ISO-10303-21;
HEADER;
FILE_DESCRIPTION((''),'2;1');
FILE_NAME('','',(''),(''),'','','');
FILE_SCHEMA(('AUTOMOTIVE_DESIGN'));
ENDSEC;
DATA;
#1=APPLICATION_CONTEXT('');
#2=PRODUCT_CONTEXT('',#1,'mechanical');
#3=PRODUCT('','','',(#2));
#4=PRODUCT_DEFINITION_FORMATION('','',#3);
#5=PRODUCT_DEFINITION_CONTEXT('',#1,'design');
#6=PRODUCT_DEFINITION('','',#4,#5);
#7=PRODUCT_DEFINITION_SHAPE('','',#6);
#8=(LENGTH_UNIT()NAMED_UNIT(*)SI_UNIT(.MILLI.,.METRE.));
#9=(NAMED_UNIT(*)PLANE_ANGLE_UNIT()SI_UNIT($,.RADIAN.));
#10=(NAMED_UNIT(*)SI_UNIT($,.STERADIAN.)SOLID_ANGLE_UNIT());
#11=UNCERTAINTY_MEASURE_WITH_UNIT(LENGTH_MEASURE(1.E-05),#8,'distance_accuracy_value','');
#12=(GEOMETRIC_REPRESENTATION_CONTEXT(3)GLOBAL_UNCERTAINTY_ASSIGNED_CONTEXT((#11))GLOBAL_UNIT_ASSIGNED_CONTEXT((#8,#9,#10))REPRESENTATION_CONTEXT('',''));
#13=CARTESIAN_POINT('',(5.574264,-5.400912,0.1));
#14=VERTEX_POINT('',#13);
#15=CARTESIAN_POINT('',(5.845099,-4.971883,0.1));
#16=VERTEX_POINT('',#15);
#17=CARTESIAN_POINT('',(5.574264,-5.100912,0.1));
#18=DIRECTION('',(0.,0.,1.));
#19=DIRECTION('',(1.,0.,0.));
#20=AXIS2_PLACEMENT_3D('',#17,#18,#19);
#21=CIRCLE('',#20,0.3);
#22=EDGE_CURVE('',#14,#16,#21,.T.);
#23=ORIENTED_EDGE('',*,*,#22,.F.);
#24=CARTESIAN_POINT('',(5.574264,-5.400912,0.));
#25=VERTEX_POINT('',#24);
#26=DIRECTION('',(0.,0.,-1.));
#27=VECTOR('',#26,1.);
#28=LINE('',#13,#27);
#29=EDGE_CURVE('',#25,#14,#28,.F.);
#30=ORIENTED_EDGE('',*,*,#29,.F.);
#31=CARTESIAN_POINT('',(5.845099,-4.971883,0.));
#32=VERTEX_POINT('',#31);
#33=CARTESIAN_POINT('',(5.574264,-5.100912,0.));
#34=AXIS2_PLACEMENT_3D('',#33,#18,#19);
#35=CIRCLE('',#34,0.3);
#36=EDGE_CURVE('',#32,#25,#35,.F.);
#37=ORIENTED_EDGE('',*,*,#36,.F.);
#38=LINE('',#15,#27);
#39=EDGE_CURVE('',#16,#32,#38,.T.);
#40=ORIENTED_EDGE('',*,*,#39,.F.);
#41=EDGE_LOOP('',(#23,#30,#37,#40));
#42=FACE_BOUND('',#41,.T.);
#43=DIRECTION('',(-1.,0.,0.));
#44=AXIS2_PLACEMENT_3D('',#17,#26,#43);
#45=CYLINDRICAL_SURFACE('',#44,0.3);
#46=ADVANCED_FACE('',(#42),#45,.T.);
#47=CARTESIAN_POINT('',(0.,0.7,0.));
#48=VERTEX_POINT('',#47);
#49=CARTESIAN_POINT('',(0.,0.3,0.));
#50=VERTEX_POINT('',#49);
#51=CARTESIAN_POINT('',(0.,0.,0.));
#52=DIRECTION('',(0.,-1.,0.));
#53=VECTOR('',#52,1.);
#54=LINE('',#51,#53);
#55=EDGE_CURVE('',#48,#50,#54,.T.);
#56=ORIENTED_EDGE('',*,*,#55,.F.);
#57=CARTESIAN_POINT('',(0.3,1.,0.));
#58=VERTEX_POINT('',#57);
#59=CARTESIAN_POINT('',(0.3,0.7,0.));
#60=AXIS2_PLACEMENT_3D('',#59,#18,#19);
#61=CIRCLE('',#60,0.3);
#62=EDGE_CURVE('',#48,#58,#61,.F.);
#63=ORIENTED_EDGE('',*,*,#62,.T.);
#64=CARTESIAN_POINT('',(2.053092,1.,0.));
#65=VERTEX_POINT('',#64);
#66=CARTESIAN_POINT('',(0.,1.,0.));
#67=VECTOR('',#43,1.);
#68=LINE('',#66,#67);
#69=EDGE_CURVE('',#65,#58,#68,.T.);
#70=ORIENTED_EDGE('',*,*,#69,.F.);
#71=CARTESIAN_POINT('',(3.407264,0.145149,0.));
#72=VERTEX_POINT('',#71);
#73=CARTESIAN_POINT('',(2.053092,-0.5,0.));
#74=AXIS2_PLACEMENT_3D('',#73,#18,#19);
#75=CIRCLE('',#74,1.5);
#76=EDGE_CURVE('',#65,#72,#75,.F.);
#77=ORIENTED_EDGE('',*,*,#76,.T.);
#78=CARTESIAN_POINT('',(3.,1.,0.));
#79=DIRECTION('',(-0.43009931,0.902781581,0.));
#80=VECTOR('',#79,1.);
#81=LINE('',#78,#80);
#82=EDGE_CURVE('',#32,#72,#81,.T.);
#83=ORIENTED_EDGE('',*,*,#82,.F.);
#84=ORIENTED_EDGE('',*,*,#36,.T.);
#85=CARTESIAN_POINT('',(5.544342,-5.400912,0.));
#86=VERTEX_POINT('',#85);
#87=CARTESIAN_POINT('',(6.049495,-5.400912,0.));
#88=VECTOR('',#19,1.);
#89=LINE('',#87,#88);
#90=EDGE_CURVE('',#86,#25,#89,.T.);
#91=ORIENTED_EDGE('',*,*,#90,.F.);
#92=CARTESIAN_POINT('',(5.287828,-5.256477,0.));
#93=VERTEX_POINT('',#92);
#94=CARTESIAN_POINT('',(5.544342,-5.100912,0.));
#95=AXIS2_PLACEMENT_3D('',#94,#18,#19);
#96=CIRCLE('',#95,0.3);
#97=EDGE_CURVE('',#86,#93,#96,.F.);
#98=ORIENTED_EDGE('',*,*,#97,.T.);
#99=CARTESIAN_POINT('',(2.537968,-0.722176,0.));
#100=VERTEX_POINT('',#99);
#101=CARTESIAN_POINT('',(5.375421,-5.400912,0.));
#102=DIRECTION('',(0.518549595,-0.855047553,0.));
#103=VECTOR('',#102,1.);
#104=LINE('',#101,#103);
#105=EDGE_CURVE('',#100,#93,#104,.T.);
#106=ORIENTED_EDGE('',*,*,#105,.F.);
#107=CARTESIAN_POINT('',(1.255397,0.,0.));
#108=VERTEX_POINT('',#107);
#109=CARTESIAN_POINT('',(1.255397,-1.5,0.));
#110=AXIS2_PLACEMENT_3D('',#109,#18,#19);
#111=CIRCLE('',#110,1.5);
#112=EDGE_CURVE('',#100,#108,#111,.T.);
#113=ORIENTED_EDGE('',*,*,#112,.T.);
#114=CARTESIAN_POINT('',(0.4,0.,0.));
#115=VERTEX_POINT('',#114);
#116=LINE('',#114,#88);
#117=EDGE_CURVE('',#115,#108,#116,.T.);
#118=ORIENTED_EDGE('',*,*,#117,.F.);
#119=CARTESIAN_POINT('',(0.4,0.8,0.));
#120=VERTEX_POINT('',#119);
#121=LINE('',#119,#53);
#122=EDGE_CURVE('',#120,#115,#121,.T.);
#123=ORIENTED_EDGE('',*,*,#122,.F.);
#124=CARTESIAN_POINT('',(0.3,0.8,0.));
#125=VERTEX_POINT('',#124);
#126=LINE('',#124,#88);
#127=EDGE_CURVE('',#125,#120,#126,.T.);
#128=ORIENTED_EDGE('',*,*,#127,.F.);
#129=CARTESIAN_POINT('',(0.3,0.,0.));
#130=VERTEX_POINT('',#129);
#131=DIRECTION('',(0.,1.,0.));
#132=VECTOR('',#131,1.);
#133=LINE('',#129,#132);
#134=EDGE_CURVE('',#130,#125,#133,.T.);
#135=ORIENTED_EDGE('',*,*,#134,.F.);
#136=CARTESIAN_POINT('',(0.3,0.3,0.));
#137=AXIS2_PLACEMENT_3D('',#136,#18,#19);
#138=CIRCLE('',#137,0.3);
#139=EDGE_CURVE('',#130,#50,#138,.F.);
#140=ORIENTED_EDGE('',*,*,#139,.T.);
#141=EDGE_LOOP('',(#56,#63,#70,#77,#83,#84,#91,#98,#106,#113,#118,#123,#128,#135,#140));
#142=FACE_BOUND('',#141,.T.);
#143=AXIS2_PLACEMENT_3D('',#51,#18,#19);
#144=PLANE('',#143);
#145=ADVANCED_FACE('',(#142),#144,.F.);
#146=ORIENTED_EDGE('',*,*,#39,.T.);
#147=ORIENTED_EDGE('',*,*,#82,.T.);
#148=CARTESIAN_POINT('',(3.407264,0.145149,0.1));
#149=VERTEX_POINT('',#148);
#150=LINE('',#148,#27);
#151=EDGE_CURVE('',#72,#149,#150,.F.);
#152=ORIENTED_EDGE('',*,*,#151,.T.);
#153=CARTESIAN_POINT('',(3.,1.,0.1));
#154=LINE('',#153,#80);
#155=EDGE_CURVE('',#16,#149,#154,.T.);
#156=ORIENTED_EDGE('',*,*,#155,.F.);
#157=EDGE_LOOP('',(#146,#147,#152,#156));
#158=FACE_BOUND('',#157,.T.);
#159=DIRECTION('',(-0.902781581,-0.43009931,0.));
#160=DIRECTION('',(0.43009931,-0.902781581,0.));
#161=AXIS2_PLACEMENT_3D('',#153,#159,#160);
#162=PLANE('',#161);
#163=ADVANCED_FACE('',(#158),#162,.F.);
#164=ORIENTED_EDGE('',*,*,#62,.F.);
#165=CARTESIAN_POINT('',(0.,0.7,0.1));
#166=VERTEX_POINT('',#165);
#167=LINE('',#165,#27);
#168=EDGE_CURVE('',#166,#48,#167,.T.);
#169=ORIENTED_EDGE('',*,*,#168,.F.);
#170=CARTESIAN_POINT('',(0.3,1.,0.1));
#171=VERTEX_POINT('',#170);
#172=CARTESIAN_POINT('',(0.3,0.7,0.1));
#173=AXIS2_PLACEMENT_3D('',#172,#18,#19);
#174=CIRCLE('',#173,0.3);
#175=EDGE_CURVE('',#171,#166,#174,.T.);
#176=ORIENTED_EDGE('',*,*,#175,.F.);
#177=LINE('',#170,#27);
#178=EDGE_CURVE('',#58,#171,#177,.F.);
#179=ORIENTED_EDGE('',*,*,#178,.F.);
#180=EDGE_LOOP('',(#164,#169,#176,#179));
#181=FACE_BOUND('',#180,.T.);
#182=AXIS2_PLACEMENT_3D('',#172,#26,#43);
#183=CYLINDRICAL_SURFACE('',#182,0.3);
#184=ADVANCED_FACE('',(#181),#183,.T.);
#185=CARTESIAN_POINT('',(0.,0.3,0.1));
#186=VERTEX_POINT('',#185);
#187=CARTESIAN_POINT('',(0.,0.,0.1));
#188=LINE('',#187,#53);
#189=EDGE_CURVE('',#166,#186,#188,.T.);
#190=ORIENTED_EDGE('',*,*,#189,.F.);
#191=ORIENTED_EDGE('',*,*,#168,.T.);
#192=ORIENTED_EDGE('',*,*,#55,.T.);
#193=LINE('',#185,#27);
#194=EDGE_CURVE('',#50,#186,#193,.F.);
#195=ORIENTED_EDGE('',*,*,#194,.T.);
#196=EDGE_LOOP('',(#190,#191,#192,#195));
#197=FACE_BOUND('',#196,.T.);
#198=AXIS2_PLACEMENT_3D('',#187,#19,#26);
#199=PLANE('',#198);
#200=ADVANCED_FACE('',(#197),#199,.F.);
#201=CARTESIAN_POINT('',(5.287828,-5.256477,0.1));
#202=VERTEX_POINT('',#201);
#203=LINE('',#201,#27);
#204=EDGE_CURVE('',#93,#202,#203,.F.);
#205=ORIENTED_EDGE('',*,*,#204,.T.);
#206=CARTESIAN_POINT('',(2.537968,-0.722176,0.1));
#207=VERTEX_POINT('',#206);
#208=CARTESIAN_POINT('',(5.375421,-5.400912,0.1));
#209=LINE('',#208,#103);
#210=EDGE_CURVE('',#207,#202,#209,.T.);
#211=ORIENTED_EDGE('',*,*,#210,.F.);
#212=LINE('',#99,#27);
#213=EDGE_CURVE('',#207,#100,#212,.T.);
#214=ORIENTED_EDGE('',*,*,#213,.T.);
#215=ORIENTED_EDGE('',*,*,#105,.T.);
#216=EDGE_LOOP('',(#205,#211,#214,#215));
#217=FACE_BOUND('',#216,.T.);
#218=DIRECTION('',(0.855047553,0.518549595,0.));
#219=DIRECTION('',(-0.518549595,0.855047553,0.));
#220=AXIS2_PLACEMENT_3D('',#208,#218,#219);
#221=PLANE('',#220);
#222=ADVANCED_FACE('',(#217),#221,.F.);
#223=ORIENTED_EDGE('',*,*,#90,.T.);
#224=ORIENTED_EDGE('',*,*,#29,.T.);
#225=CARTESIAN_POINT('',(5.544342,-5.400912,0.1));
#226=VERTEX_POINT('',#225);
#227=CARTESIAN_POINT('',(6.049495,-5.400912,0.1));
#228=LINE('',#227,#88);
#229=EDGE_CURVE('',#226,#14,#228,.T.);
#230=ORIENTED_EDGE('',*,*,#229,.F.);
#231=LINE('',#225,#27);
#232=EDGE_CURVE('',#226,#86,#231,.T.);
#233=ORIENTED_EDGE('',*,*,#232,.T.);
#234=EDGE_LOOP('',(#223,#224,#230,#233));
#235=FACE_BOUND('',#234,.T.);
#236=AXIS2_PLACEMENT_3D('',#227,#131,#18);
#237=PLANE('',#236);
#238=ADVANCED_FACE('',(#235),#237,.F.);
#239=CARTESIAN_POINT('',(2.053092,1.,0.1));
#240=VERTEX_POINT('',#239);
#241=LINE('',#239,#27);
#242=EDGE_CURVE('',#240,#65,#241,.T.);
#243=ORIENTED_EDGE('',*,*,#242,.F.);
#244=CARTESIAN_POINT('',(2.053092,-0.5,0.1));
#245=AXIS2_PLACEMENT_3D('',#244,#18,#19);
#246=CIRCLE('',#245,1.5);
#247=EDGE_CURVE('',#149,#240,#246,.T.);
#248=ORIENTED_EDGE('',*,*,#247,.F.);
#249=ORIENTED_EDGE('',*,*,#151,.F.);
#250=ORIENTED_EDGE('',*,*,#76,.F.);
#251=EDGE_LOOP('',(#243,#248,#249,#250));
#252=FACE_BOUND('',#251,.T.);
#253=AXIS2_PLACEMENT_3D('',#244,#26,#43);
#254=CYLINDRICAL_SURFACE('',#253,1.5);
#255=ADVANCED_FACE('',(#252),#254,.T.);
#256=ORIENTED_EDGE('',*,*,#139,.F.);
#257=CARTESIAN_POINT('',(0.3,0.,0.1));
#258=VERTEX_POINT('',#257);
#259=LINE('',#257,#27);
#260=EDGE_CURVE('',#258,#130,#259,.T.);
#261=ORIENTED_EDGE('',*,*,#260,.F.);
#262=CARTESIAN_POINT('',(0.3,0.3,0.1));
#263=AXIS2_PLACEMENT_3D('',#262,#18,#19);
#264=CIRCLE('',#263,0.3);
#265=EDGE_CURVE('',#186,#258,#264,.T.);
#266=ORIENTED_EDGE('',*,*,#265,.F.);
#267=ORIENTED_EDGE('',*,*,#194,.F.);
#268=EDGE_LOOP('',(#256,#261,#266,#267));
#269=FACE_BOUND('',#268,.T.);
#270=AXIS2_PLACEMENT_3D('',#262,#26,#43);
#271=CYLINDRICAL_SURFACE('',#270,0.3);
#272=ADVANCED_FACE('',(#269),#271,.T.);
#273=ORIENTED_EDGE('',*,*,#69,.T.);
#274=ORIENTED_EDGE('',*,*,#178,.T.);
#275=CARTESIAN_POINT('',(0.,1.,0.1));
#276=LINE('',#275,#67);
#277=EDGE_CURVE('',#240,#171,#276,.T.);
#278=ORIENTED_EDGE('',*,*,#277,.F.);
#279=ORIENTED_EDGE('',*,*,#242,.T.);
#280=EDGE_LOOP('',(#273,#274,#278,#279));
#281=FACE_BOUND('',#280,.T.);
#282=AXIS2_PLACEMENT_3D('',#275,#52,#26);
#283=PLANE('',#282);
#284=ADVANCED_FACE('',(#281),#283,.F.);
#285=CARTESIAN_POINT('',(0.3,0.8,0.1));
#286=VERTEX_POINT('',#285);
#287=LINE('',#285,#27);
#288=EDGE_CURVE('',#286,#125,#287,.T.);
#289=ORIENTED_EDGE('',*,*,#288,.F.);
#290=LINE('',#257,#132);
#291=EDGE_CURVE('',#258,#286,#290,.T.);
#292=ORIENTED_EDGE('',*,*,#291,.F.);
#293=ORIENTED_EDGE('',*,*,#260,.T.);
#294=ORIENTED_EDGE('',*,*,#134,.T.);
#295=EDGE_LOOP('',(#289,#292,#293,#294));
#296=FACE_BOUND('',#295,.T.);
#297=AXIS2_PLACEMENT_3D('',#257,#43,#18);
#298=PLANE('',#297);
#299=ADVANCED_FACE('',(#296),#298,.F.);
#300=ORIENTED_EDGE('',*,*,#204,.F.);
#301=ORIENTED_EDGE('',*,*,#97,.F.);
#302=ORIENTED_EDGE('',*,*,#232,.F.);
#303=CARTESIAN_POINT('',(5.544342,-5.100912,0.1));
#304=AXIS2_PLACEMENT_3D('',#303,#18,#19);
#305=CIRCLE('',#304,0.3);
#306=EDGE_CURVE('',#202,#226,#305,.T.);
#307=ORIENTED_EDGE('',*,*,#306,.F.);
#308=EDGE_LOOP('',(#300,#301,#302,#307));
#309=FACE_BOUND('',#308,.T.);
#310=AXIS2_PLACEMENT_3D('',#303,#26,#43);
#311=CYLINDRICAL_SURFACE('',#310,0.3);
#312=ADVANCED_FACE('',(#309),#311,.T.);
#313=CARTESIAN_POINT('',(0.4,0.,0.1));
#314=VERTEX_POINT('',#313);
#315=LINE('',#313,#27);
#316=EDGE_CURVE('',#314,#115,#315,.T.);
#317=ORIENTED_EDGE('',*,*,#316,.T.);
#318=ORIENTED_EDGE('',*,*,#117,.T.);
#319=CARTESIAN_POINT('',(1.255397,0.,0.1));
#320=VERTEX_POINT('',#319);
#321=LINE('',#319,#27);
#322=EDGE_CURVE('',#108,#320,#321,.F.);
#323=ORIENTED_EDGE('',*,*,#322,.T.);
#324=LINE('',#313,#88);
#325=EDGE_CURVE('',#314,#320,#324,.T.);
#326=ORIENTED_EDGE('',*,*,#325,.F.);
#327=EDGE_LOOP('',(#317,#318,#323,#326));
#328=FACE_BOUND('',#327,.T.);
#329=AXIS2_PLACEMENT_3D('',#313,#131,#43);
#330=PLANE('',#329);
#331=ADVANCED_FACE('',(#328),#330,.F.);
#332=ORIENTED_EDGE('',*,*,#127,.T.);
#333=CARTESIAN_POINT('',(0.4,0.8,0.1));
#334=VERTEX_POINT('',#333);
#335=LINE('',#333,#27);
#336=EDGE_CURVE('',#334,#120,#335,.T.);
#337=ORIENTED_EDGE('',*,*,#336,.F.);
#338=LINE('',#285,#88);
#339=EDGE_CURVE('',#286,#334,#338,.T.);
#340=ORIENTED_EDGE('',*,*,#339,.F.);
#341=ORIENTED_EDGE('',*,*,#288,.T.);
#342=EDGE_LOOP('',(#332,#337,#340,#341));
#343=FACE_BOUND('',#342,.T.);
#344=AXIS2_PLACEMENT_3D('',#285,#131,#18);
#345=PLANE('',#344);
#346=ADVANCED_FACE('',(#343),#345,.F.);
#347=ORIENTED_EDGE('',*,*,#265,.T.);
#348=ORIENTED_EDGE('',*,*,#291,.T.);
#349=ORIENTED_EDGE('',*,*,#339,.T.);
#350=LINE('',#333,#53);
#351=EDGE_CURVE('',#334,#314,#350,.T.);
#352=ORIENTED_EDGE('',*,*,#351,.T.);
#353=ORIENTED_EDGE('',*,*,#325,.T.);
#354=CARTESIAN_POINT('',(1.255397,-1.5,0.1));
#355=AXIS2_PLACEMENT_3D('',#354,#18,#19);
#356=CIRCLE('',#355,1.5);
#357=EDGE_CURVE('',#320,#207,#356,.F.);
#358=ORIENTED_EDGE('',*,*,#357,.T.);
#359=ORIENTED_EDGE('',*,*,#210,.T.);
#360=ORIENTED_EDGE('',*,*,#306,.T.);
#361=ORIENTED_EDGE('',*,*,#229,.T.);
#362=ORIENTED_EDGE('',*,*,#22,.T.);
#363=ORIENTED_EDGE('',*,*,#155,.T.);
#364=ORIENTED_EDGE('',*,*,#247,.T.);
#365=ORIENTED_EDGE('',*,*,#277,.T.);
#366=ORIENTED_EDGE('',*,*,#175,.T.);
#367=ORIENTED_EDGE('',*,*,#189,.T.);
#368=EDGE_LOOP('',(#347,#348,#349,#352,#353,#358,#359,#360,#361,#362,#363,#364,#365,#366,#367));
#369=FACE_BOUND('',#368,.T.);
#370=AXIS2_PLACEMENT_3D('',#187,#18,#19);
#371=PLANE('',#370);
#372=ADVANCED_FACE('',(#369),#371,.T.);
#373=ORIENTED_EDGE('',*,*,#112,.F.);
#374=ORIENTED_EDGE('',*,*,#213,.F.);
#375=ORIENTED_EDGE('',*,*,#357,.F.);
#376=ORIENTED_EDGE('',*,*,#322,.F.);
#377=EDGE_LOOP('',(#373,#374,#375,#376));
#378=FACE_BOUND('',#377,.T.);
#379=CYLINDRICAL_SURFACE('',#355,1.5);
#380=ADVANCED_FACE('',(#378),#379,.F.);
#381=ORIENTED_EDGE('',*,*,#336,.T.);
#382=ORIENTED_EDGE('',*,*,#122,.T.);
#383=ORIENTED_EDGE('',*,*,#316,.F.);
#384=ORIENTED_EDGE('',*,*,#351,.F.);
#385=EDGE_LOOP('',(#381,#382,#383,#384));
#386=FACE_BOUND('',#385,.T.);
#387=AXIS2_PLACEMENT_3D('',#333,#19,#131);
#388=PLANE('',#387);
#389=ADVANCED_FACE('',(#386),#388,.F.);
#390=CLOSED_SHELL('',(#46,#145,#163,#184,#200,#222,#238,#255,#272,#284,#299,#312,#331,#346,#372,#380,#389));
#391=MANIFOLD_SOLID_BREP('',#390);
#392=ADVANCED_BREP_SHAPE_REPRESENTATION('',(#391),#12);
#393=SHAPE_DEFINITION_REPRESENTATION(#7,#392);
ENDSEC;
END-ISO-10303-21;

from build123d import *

# Parameters (mm, degrees)
BOSS_EXTRUDE1_DEPTH = 0.1
FILLET1_R           = 1.5
FILLET2_R           = 0.3


with BuildPart() as part:
    # Sketch2 → Boss-Extrude1 (new body)
    with BuildSketch(Plane.XY):
        Polygon((0, 0), (0, 1), (3, 1), (6.049495139, -5.400912487), (5.375421316, -5.400912487), (2.1, 0), (0.4, 0), (0.4, 0.8), (0.3, 0.8), (0.3, 0), align=None)
    extrude(amount=BOSS_EXTRUDE1_DEPTH)

    # Fillet1
    fillet1_edges = [part.edges().sort_by_distance(p)[0] for p in [
        (3, 1, 0.05),
        (2.1, 0, 0.05),
    ]]
    fillet(fillet1_edges, radius=FILLET1_R)

    # Fillet2
    fillet2_edges = [part.edges().sort_by_distance(p)[0] for p in [
        (6.049495139, -5.400912487, 0.05),
        (5.375421316, -5.400912487, 0.05),
        (0, 1, 0.05),
        (0, 0, 0.05),
    ]]
    fillet(fillet2_edges, radius=FILLET2_R - 0.0001)  # a hair under: the kernel refuses the full size


solid = part.part
